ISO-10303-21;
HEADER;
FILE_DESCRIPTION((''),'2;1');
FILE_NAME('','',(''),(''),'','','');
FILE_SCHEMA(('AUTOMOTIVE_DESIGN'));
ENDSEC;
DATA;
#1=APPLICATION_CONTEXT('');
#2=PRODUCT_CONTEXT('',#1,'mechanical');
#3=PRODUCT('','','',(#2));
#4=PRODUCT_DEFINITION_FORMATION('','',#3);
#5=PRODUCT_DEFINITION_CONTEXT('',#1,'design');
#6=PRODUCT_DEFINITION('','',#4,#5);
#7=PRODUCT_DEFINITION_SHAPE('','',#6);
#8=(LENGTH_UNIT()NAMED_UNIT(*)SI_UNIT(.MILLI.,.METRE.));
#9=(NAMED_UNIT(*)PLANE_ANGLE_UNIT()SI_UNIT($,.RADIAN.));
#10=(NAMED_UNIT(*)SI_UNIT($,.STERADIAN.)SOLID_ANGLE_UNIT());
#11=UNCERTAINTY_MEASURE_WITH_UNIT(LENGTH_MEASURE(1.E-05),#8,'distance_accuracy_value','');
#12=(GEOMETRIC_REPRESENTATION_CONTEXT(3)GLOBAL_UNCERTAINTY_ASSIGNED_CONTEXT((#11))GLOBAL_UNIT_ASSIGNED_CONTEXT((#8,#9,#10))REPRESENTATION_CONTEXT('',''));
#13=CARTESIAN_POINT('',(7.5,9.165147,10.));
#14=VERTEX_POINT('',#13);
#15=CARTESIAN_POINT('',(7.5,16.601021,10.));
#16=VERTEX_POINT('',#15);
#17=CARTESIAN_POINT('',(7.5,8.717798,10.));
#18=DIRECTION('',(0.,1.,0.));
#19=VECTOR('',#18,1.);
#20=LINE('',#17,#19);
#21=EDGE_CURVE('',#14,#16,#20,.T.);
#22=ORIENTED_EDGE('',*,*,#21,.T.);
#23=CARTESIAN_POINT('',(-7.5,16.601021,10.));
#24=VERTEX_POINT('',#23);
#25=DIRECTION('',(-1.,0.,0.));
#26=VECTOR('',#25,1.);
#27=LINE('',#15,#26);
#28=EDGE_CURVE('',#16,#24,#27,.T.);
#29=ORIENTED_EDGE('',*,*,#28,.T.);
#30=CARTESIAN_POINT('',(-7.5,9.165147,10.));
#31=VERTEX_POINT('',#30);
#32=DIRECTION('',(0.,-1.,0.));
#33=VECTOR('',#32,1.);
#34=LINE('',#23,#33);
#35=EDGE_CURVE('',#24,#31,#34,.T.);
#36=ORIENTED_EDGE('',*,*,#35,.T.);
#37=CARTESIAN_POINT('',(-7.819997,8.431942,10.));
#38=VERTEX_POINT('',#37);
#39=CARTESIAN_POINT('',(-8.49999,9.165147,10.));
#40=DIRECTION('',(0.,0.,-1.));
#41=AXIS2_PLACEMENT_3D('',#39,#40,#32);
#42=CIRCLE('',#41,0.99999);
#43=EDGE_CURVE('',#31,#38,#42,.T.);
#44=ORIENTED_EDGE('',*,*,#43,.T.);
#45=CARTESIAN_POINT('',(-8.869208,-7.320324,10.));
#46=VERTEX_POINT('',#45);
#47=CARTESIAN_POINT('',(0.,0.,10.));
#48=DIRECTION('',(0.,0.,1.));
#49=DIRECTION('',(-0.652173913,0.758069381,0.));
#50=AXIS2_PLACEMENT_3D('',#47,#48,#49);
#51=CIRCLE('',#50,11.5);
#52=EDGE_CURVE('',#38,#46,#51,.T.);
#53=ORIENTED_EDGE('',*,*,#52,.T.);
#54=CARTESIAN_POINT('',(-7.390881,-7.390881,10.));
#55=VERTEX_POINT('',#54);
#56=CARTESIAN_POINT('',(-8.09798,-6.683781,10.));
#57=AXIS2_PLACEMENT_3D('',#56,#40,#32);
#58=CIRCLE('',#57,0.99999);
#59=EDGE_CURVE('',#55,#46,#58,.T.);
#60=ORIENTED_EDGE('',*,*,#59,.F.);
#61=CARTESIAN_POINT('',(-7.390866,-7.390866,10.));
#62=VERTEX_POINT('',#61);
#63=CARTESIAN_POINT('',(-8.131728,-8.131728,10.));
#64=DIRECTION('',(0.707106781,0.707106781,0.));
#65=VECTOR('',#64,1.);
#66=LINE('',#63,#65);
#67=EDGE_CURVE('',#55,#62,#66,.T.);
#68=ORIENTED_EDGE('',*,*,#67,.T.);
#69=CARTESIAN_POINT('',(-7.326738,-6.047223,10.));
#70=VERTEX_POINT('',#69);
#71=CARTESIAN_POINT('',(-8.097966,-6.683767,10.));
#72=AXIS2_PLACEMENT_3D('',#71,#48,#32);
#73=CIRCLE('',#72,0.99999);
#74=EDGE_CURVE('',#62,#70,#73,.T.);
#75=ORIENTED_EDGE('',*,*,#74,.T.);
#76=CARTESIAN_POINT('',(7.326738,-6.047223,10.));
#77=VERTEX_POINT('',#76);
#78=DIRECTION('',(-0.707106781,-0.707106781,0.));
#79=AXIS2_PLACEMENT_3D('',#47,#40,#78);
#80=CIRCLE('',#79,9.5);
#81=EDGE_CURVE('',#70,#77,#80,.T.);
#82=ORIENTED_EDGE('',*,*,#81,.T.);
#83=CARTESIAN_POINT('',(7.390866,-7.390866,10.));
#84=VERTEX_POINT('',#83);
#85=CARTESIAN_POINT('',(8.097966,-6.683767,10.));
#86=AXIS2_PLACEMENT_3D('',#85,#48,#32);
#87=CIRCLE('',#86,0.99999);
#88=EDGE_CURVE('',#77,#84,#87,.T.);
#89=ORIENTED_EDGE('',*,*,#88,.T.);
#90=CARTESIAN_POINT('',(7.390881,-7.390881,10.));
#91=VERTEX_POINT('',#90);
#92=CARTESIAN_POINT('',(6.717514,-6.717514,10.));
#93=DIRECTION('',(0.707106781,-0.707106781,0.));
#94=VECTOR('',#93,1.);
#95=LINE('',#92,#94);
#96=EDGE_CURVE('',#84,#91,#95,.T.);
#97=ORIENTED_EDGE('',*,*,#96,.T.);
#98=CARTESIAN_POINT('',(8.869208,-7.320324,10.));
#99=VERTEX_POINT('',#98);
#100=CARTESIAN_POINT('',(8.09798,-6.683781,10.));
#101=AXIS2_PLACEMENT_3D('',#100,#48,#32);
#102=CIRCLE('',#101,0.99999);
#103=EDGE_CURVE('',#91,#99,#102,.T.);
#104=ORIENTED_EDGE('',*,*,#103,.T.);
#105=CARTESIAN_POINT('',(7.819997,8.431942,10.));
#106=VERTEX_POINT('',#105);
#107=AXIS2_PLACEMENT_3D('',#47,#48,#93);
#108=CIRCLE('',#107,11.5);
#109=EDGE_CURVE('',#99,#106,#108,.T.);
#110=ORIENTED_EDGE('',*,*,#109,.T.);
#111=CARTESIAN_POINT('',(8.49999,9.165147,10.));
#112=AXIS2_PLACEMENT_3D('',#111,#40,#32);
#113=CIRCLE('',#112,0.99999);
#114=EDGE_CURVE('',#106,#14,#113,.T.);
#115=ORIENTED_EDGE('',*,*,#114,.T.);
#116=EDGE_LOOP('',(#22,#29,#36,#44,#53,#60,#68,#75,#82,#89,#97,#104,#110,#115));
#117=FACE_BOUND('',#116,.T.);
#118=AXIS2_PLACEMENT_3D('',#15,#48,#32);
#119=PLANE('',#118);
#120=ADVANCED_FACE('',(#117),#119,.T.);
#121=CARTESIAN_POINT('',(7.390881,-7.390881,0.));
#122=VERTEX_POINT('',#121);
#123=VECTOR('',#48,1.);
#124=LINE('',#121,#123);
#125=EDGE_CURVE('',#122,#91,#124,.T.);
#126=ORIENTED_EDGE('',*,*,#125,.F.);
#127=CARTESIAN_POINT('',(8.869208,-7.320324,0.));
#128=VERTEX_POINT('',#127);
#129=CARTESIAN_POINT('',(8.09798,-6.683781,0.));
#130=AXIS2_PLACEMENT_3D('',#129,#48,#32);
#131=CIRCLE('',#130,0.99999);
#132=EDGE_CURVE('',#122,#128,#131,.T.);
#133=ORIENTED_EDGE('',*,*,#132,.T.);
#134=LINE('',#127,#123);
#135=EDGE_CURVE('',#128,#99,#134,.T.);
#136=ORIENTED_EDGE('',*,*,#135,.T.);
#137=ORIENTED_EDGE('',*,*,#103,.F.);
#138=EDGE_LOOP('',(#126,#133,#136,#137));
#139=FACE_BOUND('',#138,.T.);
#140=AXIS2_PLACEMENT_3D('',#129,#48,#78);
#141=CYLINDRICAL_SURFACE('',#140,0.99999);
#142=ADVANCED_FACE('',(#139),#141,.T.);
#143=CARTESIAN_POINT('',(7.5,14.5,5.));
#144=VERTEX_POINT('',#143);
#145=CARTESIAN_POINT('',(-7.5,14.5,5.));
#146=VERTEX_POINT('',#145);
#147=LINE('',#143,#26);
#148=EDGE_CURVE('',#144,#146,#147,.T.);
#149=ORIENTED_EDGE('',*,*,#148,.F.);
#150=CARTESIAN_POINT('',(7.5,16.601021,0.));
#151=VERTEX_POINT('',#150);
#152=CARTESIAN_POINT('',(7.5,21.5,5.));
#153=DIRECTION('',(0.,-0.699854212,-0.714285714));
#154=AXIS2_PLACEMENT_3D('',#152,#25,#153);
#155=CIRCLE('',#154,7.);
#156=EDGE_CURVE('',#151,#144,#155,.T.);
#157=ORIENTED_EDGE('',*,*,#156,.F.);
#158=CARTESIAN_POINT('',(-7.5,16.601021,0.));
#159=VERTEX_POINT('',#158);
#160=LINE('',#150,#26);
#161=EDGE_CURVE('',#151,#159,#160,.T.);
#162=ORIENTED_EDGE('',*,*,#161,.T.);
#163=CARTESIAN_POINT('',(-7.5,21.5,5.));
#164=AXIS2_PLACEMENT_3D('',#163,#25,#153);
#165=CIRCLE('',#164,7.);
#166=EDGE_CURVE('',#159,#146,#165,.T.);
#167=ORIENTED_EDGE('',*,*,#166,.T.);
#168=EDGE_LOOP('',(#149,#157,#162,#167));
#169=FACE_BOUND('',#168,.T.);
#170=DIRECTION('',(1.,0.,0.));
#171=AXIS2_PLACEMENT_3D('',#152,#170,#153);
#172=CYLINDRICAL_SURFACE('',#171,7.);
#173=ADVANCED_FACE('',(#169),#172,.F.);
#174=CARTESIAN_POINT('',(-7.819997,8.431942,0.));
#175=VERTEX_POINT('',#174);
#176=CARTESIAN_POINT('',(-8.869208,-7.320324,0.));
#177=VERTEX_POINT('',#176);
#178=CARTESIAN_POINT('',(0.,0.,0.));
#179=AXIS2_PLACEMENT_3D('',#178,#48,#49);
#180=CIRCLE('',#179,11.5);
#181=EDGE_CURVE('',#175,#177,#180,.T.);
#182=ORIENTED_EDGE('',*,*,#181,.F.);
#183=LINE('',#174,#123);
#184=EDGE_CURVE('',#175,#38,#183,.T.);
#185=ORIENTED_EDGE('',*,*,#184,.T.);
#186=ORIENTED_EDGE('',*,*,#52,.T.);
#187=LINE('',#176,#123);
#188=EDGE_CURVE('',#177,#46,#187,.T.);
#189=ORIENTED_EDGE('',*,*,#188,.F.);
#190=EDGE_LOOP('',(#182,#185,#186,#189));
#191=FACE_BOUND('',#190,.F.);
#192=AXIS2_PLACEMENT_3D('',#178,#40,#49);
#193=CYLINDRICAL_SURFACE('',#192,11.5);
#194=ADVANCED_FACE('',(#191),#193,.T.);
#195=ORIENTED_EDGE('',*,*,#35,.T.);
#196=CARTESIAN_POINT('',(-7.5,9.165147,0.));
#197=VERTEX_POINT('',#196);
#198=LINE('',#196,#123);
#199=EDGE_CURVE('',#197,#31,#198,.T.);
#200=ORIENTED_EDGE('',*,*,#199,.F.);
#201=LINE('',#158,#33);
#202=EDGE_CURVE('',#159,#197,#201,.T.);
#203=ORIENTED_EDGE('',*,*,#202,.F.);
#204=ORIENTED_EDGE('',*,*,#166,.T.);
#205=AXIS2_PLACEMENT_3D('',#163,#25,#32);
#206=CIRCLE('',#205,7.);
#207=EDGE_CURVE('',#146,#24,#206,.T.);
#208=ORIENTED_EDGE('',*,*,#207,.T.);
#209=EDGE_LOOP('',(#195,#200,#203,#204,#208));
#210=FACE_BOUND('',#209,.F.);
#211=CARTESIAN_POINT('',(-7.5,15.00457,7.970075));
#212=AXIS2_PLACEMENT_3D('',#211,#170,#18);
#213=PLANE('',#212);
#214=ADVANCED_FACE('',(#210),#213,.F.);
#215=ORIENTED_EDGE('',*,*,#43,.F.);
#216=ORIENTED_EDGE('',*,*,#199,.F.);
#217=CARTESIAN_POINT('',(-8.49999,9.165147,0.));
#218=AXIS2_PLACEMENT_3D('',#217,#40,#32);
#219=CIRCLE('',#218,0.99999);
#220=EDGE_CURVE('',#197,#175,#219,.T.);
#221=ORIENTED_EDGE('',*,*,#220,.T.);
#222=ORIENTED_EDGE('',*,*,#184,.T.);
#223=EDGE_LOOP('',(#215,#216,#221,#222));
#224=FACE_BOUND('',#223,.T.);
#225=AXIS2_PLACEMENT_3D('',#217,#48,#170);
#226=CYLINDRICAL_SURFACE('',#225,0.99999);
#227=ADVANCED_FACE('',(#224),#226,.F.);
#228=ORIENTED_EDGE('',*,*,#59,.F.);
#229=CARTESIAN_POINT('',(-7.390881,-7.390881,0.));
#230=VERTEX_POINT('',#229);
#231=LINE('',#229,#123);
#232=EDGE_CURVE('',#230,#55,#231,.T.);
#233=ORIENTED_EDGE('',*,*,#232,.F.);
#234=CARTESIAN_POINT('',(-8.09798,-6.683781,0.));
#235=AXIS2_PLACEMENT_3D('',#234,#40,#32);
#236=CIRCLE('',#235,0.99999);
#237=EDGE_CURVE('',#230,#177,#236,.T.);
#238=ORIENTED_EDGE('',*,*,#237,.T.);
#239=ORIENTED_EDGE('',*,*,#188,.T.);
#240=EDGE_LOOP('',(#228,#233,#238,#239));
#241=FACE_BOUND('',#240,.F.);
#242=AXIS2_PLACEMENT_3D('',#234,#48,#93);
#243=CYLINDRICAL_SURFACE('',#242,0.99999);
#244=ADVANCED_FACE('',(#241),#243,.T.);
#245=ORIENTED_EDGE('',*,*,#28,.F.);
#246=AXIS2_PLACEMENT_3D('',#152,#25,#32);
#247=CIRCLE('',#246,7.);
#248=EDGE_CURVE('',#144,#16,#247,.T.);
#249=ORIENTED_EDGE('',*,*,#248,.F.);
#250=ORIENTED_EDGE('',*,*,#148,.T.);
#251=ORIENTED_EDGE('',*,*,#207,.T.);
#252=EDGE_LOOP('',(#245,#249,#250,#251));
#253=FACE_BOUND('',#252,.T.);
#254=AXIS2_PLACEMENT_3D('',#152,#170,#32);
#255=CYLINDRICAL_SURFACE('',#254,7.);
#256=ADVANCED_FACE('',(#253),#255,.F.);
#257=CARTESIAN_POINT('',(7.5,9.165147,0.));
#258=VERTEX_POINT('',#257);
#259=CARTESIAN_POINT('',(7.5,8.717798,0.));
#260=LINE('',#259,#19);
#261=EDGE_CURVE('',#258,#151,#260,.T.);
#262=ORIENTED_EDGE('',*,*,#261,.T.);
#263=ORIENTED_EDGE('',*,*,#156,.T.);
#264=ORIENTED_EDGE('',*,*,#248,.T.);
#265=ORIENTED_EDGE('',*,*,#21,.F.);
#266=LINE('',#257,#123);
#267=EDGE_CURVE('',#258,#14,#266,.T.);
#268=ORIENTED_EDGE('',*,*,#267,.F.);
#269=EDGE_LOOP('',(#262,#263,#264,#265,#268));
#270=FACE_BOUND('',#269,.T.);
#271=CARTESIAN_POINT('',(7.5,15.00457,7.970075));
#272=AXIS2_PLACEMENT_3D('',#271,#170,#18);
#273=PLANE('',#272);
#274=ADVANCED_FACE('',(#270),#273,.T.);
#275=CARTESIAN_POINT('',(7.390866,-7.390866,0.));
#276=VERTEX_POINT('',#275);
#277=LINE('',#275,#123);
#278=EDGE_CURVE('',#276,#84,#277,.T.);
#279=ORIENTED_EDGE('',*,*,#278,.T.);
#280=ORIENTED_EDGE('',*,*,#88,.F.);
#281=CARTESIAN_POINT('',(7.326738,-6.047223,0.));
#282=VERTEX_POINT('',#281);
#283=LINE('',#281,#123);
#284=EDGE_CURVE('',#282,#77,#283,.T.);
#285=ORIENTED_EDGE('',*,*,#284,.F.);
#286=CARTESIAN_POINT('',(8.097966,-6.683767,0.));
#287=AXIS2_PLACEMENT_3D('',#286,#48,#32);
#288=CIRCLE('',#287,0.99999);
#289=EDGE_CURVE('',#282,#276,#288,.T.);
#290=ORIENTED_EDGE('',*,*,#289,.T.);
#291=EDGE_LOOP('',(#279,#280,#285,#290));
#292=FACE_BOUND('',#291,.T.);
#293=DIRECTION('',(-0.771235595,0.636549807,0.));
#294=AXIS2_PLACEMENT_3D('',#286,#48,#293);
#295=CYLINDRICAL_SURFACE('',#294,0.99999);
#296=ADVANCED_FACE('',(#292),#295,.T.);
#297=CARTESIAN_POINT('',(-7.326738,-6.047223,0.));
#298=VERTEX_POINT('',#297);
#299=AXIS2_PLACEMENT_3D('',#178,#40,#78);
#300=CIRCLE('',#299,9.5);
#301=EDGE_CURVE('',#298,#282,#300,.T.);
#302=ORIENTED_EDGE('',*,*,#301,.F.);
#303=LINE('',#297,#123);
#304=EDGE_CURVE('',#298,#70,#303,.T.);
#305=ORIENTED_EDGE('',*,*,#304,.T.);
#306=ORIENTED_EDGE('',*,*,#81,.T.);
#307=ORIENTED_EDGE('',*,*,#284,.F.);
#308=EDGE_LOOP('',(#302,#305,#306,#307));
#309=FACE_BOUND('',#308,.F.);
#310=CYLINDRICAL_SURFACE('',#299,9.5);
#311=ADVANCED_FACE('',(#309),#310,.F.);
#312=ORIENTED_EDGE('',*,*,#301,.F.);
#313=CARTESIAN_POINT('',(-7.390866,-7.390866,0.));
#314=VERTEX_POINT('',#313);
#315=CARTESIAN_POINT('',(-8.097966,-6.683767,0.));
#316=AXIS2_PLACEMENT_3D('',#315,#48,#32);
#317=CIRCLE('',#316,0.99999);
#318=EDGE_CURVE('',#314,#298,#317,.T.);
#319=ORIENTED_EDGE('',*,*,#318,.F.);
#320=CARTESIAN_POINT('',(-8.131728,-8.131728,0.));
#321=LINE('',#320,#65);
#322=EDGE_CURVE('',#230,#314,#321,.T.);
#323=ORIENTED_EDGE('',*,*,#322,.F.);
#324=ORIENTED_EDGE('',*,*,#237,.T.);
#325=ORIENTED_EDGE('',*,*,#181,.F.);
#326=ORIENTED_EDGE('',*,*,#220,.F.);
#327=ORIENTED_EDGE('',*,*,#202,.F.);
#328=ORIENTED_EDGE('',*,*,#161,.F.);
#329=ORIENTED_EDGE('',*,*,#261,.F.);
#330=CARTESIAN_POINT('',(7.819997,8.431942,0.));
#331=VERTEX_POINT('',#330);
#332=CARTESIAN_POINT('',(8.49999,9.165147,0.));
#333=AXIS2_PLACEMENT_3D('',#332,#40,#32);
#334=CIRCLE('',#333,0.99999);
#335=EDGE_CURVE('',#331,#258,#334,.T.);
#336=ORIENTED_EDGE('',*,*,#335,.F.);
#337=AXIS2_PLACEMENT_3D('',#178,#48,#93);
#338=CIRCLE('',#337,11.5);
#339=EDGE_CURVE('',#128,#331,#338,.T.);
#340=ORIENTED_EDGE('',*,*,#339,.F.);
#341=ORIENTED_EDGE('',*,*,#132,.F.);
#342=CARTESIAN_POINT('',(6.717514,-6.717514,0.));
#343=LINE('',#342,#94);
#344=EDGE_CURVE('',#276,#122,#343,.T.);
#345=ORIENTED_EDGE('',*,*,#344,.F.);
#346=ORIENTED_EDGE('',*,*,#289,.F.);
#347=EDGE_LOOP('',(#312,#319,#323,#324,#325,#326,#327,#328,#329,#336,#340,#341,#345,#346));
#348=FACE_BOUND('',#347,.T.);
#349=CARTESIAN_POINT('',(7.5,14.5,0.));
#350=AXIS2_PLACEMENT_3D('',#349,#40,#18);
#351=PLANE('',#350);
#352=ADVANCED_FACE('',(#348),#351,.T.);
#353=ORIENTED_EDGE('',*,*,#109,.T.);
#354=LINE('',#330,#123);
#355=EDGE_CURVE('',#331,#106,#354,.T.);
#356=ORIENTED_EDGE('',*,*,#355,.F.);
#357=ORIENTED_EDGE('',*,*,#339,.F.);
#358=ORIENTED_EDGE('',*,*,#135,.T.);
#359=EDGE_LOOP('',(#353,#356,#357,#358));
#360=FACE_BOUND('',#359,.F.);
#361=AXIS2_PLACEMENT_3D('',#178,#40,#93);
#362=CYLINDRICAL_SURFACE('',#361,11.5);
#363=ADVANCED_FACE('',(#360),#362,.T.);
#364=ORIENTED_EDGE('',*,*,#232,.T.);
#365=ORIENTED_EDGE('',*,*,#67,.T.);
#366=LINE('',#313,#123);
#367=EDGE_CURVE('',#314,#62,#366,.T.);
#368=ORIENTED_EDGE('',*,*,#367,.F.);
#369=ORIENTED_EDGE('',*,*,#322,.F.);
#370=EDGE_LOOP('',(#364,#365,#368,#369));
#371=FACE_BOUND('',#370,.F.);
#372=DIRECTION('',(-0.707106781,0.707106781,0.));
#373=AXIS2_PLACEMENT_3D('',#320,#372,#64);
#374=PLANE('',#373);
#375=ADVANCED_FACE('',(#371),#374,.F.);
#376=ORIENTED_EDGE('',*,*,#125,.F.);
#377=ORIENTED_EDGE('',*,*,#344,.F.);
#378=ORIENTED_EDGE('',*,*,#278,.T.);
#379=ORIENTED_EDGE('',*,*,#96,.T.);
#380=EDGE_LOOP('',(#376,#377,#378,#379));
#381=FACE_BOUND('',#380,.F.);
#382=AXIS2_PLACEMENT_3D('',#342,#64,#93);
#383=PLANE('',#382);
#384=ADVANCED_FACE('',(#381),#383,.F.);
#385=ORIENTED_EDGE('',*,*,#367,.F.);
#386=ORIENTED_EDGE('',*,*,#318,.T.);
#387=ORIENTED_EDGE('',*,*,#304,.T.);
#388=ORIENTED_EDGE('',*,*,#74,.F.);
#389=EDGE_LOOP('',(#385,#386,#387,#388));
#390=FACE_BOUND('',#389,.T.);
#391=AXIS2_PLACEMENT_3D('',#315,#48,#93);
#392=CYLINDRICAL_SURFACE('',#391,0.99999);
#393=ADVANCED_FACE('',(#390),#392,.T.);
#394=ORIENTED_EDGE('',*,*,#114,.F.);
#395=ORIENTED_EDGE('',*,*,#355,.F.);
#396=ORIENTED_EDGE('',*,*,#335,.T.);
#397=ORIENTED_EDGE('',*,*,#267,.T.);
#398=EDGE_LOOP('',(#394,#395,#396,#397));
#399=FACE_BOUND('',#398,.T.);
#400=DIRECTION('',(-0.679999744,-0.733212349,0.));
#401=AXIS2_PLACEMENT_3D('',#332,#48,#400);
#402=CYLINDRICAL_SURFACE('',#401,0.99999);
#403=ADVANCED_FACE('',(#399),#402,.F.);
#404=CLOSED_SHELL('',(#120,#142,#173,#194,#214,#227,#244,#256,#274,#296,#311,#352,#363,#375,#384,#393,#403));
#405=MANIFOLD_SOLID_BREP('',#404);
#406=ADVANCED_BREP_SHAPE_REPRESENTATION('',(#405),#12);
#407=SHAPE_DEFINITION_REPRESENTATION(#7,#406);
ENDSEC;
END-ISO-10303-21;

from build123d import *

# Parameters (mm, degrees)
F1_DEPTH = 10
F3_DEPTH = 15
F4_R     = 0.99999


# Not quite as in the source:
# - a fillet or chamfer is up to 0.001 mm smaller than in the source, because OpenCascade refuses the exact size


with BuildPart() as f1:
    # F0 (on Top) → F1 (new body)
    with BuildSketch(Plane.XY):
        with BuildLine():
            ThreePointArc((-6.7175144213, -6.7175144213), (0, 9.5), (6.7175144213, -6.7175144213))
            Line((6.7175144213, -6.7175144213), (8.1317279836, -8.1317279836))
            ThreePointArc((8.1317279836, -8.1317279836), (11.4919258811, 0.430859077), (7.5, 8.7177978871))
            Line((7.5, 8.7177978871), (7.5, 9.5))
            Line((7.5, 9.5), (7.5, 14.5))
            Line((7.5, 14.5), (-7.5, 14.5))
            Line((-7.5, 14.5), (-7.5, 9.5))
            Line((-7.5, 9.5), (-7.5, 8.7177978871))
            ThreePointArc((-7.5, 8.7177978871), (-11.4919258811, 0.430859077), (-8.1317279836, -8.1317279836))
            Line((-8.1317279836, -8.1317279836), (-6.7175144213, -6.7175144213))
        make_face()
    extrude(amount=F1_DEPTH)

    # F2 (on face) → F3 (join, through all)
    with BuildSketch(Plane.YZ.offset(7.5)):
        with BuildLine():
            ThreePointArc((14.5, 5), (15.0465956117, 7.7117470016), (16.6010205144, 10))
            Line((16.6010205144, 10), (14.5, 10))
            Line((14.5, 10), (14.5, 5))
        make_face()
        with BuildLine():
            Line((14.5, 0), (16.6010205144, 0))
            ThreePointArc((16.6010205144, 0), (15.0465956117, 2.2882529984), (14.5, 5))
            Line((14.5, 5), (14.5, 0))
        make_face()
    extrude(amount=-F3_DEPTH)

    # F4 (radius 1 in the source; OpenCascade refuses exactly that, so slightly less here)
    f4_edges = [f1.edges().sort_by_distance(p)[0] for p in [
        (-6.717514, -6.717514, 5),
        (-8.131728, -8.131728, 5),
        (8.131728, -8.131728, 5),
        (6.717514, -6.717514, 5),
        (7.5, 8.717798, 5),
        (-7.5, 8.717798, 5),
    ]]
    fillet(f4_edges, radius=F4_R)


solid = f1.part
